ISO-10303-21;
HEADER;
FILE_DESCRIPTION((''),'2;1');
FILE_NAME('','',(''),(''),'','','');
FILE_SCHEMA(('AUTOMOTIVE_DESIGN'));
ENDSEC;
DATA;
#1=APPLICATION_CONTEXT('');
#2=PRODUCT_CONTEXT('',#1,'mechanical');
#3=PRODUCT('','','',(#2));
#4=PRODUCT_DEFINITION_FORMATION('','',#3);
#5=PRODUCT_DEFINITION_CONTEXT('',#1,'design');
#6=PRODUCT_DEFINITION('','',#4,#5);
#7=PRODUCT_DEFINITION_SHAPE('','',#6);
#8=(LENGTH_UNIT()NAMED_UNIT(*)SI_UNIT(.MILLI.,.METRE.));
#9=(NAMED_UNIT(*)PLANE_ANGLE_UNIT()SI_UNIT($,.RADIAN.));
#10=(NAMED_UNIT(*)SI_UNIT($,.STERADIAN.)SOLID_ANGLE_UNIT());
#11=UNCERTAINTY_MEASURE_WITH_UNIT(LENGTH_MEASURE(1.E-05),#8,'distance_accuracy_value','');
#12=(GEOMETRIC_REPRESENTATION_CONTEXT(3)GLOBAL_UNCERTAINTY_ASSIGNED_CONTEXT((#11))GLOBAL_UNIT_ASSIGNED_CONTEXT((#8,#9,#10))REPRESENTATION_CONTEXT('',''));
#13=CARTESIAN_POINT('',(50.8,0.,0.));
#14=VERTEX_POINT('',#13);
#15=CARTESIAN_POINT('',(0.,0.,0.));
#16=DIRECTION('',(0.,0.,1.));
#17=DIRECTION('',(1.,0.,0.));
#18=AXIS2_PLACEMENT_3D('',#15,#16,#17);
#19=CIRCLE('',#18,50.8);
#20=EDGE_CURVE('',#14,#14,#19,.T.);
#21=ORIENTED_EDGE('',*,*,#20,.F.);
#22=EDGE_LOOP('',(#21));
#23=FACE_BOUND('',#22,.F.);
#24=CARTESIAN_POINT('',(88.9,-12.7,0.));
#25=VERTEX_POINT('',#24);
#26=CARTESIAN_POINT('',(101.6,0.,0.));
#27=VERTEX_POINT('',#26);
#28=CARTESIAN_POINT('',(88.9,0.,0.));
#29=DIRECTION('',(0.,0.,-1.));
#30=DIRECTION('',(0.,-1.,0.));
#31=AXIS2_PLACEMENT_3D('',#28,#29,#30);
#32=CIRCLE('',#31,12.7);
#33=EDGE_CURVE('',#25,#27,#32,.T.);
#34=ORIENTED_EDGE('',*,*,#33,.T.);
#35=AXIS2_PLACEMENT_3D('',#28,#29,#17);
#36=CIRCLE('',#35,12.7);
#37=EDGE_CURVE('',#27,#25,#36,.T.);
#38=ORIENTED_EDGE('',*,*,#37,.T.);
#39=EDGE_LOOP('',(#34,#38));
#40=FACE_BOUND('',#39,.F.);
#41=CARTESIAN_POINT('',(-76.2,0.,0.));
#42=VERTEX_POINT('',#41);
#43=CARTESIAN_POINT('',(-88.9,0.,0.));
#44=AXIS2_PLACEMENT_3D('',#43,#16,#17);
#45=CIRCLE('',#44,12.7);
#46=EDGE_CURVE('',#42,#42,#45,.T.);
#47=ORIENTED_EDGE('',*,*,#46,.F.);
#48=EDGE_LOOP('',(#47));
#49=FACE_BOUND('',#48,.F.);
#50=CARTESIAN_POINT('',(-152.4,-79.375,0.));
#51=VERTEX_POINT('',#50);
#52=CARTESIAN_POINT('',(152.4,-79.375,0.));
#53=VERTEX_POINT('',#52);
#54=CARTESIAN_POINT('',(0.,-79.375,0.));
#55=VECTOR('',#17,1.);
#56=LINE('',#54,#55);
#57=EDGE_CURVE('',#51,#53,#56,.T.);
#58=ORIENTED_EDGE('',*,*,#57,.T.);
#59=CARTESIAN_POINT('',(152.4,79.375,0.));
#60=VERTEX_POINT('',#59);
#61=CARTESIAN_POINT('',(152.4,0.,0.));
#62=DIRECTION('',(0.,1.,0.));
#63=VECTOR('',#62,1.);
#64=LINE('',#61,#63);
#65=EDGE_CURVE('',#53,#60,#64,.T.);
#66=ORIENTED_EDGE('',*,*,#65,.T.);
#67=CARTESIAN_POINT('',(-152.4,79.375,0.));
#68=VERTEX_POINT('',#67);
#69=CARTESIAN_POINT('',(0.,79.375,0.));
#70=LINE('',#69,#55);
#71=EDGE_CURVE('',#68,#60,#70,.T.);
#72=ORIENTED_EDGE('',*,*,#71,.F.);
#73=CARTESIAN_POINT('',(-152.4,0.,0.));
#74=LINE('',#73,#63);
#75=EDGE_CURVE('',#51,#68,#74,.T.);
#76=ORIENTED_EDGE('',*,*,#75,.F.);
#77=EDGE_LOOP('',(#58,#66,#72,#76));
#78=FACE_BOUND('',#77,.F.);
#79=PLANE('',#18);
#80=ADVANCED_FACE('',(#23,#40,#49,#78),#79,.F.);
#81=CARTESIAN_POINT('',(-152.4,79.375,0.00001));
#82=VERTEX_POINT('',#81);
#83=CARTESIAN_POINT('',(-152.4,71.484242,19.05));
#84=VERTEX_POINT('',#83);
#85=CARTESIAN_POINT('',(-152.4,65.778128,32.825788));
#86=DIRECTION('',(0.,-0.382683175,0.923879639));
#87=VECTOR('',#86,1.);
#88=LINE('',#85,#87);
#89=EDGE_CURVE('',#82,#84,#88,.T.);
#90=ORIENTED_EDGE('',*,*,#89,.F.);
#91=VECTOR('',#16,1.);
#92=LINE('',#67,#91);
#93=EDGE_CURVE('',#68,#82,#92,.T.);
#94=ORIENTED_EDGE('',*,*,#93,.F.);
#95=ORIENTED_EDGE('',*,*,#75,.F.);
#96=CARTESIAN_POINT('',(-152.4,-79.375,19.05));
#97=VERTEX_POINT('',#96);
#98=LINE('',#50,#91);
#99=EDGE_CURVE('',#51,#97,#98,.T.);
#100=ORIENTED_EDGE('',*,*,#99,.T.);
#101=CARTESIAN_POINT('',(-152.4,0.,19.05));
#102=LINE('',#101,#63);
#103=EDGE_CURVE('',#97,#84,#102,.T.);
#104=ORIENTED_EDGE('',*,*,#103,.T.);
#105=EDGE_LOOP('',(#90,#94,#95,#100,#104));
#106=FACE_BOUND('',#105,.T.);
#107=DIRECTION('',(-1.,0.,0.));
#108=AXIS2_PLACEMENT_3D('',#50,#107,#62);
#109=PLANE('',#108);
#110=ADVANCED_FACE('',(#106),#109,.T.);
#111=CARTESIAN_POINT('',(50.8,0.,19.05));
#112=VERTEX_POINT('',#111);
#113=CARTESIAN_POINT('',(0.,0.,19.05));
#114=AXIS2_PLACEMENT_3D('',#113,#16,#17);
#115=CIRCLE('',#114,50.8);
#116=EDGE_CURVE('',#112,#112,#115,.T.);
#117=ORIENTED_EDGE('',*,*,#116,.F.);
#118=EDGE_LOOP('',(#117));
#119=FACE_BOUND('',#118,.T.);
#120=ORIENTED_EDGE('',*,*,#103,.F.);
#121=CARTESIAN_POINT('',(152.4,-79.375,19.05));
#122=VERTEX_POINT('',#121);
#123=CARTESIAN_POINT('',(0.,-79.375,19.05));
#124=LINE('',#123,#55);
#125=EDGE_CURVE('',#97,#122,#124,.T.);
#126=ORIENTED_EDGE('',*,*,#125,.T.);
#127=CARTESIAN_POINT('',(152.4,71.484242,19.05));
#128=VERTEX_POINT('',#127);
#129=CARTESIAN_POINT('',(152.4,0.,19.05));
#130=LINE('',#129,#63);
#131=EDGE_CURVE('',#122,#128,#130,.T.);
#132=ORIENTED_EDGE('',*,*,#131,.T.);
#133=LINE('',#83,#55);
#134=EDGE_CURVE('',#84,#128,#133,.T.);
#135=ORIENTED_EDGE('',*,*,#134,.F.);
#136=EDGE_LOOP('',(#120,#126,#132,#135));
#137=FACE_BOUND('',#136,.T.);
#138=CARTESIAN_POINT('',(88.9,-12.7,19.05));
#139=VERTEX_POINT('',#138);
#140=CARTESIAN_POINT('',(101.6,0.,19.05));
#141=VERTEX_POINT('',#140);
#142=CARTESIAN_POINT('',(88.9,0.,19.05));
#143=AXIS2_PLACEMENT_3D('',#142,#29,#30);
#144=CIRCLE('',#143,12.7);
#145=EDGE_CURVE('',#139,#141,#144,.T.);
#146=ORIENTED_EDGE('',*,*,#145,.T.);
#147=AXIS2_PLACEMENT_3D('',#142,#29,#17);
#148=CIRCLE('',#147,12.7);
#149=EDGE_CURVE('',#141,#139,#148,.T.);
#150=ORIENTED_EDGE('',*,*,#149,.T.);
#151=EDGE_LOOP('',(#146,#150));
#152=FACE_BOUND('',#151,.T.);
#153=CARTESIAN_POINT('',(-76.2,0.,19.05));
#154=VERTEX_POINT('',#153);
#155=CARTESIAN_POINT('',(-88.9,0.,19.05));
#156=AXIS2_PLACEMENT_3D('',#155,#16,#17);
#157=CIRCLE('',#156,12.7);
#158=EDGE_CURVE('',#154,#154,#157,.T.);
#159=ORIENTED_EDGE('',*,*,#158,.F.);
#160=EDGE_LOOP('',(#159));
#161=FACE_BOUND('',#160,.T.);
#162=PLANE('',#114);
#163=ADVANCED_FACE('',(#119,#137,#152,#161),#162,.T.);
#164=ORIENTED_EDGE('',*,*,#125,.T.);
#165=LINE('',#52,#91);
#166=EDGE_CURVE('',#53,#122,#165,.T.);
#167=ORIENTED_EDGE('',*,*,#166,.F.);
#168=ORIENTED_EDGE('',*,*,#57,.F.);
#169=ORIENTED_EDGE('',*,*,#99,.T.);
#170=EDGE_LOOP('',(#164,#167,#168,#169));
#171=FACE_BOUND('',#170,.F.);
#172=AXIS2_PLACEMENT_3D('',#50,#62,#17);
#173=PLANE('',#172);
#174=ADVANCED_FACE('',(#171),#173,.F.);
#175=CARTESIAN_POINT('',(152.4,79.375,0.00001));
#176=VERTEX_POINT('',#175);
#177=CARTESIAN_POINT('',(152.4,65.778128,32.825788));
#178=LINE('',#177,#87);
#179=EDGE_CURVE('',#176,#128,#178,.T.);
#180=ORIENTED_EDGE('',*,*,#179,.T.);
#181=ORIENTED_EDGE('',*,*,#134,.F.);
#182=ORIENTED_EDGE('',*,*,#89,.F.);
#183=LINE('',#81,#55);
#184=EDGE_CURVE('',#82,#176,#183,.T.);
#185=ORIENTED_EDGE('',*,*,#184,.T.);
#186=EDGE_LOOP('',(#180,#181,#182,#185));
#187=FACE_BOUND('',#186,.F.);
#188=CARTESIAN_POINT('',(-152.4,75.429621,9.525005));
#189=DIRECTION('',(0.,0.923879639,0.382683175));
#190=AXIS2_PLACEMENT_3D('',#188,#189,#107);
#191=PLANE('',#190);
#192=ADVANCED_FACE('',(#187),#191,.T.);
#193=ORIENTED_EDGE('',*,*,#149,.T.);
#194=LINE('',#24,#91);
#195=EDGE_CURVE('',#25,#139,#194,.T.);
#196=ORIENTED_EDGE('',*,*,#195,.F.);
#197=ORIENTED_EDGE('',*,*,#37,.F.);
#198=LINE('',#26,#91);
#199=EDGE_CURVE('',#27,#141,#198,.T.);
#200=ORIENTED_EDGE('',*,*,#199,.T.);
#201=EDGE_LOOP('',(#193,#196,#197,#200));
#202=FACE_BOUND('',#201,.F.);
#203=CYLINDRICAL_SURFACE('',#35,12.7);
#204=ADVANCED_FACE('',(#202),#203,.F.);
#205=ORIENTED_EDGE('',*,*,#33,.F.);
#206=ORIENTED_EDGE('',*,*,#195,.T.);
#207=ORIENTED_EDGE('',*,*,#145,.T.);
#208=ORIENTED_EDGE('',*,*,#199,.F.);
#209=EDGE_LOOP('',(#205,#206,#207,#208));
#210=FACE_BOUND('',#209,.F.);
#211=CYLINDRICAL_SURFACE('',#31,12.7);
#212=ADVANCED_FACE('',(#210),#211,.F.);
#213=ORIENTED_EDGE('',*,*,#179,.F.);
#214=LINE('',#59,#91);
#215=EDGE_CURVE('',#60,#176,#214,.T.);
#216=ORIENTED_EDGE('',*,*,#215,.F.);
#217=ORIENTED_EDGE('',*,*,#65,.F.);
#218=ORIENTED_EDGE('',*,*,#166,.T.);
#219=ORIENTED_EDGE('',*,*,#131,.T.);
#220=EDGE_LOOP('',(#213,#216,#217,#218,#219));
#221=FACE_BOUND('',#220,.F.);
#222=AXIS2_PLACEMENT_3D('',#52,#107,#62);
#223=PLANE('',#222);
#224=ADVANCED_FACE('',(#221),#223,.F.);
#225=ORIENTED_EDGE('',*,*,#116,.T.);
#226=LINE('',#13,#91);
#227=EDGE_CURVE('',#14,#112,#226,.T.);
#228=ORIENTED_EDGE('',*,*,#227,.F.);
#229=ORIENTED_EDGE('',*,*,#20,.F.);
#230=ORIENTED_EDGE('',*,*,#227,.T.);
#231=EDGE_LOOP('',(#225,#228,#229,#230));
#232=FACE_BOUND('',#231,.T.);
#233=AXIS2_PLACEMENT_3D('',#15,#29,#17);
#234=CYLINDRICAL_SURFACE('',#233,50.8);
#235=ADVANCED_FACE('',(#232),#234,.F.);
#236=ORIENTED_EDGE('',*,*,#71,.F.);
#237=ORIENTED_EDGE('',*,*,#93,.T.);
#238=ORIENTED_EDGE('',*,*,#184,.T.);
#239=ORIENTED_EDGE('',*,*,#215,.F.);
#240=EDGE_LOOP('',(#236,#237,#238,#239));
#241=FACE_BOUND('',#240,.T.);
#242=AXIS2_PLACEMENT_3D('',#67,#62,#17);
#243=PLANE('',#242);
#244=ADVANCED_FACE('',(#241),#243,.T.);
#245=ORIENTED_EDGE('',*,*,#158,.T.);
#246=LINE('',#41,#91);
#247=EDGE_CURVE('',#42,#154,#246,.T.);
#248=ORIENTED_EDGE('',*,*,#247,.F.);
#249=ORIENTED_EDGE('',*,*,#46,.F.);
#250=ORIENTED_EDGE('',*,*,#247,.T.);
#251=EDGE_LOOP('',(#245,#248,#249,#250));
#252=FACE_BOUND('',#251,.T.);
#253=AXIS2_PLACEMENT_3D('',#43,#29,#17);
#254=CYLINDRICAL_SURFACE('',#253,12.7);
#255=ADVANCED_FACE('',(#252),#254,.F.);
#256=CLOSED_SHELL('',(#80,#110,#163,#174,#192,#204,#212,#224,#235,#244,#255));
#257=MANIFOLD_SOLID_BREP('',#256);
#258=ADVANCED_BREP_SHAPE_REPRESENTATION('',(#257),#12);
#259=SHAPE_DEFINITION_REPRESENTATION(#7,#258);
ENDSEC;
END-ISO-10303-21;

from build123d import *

# Parameters (mm, degrees)
F0_W     = 304.8
F0_H     = 158.75
F0_R     = 12.7
F0_R_2   = 50.8
F1_DEPTH = 19.05
F2_SIZE2 = 7.890758
F2_SIZE  = 19.04999


# Not quite as in the source:
# - a fillet or chamfer is up to 0.001 mm smaller than in the source, because OpenCascade refuses the exact size


with BuildPart() as f1:
    # F0 (on Top) → F1 (new body)
    with BuildSketch(Plane.XY):
        Rectangle(F0_W, F0_H)
        with Locations((-88.9, 0)):
            Circle(F0_R, mode=Mode.SUBTRACT)
        Circle(F0_R_2, mode=Mode.SUBTRACT)
        with BuildLine():
            ThreePointArc((88.9, -12.7), (79.9197438789, 8.9802561211), (101.6, 0))
            ThreePointArc((101.6, 0), (97.8802561211, -8.9802561211), (88.9, -12.7))
        make_face(mode=Mode.SUBTRACT)
    extrude(amount=F1_DEPTH)

    # F2 (size 19.05 and 7.8907683632 in the source; OpenCascade refuses exactly that, so slightly less here)
    f2_edges = [f1.edges().sort_by_distance(p)[0] for p in [
        (0, 79.375, 19.05),
    ]]
    f2_side = f1.faces().sort_by_distance((0, 79.375, 9.525))[0]
    chamfer(f2_edges, length=F2_SIZE, length2=F2_SIZE2, reference=f2_side)


solid = f1.part
